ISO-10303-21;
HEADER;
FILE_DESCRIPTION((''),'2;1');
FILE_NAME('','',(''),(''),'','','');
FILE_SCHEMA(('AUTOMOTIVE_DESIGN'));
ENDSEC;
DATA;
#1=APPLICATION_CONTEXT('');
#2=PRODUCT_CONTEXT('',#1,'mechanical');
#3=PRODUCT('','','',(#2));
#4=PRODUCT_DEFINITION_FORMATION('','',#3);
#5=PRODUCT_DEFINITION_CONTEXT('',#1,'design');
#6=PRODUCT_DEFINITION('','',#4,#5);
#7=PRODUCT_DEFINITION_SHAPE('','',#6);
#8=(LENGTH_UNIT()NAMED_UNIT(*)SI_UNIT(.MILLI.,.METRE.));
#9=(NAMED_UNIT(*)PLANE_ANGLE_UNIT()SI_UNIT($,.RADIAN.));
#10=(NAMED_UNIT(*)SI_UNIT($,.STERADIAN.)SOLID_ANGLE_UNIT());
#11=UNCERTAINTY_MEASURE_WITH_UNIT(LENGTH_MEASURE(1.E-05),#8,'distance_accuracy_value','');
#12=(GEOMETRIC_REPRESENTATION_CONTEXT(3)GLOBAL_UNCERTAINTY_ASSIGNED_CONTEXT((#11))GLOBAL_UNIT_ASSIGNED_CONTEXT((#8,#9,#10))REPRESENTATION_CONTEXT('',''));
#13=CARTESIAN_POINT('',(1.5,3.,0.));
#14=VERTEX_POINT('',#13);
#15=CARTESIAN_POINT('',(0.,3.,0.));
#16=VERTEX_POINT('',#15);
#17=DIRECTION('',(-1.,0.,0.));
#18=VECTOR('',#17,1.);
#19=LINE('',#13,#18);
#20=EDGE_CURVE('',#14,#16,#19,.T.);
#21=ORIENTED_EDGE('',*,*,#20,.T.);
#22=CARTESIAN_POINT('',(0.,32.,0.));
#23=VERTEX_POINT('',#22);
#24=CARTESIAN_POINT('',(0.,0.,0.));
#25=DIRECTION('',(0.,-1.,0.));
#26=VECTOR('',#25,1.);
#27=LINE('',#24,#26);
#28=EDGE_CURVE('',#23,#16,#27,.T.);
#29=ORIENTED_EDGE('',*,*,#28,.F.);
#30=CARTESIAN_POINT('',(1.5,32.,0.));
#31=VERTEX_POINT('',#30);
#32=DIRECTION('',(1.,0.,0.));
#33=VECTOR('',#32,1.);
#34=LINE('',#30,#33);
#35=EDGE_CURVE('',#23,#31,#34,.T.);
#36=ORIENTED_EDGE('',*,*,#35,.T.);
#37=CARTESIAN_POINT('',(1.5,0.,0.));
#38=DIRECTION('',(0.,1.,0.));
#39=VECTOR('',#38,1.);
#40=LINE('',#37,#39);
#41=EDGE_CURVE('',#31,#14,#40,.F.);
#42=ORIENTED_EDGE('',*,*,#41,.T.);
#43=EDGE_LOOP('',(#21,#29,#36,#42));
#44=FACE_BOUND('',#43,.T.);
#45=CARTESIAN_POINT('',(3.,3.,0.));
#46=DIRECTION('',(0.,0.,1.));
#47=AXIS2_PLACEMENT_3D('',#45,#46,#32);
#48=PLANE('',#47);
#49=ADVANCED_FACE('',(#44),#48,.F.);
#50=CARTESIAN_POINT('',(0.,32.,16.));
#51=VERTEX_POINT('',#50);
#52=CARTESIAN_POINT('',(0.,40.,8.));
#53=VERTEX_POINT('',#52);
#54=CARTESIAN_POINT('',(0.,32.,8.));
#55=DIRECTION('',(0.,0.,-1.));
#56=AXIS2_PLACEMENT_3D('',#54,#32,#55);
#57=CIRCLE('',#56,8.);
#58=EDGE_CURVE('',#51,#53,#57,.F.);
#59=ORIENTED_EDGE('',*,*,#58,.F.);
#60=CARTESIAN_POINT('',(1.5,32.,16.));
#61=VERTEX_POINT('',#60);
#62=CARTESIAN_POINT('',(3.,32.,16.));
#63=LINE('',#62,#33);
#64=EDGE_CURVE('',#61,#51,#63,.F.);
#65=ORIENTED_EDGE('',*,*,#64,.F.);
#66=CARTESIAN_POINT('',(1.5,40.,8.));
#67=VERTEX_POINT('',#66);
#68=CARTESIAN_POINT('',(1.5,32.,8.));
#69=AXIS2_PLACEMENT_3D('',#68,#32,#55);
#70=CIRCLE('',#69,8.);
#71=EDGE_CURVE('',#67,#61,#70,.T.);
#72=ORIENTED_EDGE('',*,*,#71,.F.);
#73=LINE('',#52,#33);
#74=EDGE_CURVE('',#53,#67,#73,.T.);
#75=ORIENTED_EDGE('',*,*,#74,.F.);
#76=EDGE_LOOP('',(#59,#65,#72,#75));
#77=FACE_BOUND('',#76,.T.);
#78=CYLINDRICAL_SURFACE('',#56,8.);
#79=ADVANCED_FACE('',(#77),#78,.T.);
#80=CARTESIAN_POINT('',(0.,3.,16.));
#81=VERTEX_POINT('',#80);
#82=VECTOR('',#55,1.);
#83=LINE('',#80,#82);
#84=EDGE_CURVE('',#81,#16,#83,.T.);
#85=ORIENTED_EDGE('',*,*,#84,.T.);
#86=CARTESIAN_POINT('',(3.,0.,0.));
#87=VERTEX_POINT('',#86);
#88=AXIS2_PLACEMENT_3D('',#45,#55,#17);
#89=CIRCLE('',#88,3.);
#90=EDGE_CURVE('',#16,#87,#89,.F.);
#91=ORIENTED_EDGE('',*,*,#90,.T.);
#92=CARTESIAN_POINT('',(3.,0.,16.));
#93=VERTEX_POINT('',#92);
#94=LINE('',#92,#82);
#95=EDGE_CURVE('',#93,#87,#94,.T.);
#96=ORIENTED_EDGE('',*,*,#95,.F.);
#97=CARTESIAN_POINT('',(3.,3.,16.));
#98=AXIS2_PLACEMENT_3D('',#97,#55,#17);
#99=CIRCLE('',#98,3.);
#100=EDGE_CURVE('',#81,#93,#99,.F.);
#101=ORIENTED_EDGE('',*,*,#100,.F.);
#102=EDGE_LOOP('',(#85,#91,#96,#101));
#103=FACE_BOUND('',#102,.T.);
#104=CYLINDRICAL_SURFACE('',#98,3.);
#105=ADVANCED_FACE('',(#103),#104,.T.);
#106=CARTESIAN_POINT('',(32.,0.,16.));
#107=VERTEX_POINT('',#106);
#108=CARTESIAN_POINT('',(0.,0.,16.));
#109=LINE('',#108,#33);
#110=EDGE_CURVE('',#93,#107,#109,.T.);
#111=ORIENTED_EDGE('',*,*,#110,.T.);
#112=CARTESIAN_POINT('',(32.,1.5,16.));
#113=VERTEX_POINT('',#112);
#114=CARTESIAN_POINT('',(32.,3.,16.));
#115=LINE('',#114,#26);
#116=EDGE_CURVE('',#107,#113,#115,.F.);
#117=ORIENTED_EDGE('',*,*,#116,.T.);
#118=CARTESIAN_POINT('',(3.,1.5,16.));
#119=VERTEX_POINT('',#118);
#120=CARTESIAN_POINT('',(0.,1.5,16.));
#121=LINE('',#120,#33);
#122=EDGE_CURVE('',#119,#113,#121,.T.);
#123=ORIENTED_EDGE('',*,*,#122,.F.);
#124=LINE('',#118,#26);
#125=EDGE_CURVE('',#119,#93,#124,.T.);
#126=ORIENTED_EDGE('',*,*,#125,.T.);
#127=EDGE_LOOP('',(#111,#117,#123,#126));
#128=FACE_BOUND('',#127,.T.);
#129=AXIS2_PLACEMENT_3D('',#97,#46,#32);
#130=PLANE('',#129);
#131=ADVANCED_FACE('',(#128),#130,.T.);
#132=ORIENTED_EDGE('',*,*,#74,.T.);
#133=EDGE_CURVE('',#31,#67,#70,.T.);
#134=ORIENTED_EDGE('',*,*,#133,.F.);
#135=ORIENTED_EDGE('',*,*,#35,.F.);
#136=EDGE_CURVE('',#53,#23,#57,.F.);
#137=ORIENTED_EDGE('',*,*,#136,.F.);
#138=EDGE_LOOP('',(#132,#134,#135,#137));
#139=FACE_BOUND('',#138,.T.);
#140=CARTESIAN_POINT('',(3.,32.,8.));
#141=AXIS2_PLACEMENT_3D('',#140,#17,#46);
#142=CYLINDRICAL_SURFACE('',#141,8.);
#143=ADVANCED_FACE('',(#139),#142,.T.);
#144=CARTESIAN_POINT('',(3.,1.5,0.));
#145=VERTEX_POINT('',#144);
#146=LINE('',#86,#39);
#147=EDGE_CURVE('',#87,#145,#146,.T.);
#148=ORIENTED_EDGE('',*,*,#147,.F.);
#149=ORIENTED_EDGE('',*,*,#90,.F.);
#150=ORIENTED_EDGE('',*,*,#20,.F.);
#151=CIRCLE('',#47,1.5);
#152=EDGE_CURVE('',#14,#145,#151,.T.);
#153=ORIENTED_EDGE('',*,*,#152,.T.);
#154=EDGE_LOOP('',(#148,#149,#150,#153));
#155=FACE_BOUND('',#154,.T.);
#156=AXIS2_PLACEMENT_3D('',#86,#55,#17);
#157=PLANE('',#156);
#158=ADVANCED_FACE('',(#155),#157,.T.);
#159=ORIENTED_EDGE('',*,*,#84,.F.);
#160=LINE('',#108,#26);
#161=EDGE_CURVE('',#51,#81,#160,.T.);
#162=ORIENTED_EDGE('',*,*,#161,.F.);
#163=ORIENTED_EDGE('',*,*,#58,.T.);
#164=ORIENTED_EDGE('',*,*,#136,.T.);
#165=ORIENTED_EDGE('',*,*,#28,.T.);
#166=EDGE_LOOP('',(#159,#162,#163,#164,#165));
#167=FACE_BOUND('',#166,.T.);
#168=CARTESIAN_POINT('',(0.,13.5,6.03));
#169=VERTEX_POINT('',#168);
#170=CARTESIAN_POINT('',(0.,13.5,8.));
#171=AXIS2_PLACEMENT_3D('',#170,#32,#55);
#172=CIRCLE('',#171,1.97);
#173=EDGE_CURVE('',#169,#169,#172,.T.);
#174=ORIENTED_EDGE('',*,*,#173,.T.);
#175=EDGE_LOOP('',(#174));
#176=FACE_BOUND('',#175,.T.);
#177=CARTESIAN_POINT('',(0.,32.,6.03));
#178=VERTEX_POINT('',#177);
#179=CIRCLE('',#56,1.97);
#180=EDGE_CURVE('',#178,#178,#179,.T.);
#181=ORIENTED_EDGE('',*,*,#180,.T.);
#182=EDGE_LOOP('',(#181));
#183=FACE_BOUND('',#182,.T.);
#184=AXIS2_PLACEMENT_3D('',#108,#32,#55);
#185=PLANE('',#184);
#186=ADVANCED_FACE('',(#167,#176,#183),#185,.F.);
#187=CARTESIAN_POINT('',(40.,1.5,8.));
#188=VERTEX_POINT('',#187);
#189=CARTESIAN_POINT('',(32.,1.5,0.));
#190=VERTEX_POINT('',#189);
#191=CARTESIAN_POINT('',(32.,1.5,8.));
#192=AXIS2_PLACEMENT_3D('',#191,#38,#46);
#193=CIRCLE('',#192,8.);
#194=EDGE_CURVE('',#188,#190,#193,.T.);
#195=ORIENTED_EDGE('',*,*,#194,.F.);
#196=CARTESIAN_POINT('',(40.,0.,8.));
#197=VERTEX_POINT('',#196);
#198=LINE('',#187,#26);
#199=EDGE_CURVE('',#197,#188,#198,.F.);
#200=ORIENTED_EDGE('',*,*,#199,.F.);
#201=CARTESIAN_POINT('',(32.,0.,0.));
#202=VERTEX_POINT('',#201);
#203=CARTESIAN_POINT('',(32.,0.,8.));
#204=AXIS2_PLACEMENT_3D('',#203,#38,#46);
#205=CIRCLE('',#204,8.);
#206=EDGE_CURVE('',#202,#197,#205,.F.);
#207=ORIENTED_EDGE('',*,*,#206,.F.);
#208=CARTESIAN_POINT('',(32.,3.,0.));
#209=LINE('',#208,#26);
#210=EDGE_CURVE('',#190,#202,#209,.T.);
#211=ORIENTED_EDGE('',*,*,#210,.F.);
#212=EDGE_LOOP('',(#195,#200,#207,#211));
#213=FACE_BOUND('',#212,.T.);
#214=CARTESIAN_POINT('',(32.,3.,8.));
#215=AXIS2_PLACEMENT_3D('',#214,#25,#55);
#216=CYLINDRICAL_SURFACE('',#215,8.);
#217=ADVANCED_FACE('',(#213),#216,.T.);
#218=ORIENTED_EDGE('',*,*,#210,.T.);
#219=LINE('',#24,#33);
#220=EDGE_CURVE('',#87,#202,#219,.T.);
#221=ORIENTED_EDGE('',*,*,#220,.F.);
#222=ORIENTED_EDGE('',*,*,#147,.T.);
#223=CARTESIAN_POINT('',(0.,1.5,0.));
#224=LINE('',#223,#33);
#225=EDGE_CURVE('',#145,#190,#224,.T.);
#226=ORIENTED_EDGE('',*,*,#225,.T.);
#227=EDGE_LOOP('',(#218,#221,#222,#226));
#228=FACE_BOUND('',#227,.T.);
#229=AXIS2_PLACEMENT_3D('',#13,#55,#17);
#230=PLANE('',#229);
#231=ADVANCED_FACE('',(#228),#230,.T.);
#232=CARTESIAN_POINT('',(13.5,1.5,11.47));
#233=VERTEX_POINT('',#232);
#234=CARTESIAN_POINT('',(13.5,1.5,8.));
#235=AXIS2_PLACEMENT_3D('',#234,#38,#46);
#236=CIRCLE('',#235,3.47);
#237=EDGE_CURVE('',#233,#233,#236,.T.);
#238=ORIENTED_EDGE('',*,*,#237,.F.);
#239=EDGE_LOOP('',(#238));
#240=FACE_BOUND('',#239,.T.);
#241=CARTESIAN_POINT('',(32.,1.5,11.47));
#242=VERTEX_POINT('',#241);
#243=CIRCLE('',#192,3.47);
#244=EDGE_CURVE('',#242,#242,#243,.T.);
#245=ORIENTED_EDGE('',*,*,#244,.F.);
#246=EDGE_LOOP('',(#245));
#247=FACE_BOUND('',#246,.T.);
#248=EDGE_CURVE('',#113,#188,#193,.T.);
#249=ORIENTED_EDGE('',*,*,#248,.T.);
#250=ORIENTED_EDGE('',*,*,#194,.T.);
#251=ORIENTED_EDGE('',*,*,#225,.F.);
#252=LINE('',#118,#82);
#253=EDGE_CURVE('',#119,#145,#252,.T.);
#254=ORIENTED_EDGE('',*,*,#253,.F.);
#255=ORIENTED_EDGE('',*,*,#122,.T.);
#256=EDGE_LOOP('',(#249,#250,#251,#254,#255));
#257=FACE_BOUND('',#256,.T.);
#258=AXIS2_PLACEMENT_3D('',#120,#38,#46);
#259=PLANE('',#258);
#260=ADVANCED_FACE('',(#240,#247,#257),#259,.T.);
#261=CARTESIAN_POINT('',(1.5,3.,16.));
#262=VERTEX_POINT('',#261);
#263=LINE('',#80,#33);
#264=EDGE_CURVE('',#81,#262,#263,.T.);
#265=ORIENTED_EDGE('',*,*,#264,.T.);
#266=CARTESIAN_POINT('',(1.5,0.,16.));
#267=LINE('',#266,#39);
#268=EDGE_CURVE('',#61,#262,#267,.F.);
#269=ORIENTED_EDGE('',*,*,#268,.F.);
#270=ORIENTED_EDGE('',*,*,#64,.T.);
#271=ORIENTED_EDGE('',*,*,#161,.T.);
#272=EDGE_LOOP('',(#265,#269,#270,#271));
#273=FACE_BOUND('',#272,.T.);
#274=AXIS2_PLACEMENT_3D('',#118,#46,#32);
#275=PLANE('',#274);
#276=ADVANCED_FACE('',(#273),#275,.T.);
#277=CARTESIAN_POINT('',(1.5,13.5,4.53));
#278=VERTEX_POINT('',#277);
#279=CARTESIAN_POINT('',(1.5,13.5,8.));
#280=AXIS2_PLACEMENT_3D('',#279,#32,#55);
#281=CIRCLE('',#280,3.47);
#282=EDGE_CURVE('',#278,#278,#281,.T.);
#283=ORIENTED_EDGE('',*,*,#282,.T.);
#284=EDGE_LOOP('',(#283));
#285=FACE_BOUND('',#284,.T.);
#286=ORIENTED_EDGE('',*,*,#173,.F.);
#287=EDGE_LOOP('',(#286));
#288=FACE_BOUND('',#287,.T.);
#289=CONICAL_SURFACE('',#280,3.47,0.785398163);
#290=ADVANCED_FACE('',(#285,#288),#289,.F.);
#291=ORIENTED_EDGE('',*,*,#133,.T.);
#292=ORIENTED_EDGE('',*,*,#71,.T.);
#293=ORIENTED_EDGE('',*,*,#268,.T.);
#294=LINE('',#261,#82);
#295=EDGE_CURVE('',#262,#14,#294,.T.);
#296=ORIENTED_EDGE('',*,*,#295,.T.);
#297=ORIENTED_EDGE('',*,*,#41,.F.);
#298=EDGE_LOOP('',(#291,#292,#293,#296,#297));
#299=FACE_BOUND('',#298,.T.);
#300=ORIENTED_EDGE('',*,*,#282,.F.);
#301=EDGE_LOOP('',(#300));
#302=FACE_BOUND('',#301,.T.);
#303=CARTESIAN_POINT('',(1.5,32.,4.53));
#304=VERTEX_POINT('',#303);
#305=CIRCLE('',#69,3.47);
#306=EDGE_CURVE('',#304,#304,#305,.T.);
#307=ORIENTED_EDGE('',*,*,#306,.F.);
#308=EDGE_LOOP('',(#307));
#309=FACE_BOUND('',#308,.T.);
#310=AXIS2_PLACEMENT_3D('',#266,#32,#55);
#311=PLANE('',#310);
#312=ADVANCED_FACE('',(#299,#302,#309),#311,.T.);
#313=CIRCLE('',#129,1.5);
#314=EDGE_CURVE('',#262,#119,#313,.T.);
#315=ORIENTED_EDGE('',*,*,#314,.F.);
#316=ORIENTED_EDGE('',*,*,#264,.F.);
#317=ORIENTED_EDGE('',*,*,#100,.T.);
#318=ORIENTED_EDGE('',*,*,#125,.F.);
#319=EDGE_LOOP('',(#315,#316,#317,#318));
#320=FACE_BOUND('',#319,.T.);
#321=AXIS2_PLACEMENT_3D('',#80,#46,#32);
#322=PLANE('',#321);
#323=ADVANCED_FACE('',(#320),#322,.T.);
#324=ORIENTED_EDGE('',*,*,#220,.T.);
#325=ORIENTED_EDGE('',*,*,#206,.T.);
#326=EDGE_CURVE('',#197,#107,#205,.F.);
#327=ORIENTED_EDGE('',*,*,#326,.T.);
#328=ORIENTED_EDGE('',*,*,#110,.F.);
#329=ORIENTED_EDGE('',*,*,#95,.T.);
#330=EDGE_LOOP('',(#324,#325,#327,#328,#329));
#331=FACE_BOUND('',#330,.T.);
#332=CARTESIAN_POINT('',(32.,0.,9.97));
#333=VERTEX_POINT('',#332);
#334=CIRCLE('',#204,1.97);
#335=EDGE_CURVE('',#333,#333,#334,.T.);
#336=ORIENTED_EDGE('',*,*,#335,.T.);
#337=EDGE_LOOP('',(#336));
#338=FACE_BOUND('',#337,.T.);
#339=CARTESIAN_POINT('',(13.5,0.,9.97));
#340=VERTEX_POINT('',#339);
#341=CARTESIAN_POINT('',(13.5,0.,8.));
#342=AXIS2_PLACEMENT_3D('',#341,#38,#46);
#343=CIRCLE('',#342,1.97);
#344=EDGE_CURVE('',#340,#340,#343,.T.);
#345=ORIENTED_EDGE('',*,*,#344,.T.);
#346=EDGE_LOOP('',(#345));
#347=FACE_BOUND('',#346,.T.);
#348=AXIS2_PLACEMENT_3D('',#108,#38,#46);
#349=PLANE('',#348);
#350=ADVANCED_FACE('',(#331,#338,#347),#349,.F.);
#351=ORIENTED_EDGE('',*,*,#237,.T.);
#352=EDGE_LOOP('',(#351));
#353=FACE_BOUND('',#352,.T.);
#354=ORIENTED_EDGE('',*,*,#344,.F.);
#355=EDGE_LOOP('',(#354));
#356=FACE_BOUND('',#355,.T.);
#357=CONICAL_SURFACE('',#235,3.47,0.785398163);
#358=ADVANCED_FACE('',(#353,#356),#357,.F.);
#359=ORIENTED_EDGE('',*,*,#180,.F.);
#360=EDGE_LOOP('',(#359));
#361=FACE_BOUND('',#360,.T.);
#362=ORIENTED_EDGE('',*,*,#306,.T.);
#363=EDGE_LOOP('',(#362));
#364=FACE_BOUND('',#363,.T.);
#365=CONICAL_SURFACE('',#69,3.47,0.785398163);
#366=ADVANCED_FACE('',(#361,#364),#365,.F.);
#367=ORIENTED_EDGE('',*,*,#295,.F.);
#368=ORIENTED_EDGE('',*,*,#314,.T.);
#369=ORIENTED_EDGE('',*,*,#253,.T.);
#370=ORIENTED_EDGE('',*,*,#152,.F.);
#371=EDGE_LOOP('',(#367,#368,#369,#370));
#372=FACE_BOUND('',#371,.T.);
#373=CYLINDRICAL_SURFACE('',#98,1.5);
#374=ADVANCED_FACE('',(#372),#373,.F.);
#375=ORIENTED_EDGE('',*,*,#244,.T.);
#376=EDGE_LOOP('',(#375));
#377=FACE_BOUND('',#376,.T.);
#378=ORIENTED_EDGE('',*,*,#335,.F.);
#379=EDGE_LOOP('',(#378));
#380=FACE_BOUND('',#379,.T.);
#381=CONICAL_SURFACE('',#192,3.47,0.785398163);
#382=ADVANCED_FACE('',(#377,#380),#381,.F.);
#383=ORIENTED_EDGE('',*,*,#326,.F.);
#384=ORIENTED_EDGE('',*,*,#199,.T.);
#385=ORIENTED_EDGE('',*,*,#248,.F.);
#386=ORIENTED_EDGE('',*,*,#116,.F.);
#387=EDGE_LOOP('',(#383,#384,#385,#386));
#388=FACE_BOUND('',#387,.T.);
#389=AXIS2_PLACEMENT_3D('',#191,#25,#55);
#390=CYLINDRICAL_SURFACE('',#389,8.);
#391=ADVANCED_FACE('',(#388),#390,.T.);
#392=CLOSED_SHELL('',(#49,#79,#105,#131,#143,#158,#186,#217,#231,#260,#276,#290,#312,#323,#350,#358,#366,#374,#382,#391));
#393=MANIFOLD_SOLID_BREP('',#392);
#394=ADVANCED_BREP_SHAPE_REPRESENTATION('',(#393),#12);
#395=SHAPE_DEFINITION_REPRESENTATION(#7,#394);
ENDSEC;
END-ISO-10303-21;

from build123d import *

# Parameters (mm, degrees)
BASE_FLANGIA1_DEPTH    = 16
RACCORDO1_R            = 8
RIPETIZIONE_A_L1_COUNT = 2
RIPETIZIONE_A_L1_PITCH = 18.5
RIPETIZIONE_A_L2_COUNT = 2
RIPETIZIONE_A_L2_PITCH = 18.5


# Sheet-metal steps are written as plain solids
with BuildPart() as part:
    # Schizzo1 → Base-Flangia1 (new body)
    with BuildSketch(Plane.XY):
        with BuildLine():
            Line((40, 0), (3, 0))
            ThreePointArc((3, 0), (0.878679656, 0.878679656), (0, 3))
            Line((0, 3), (0, 40))
            Line((0, 40), (1.5, 40))
            Line((1.5, 40), (1.5, 3))
            ThreePointArc((1.5, 3), (1.939339828, 1.939339828), (3, 1.5))
            Line((3, 1.5), (40, 1.5))
            Line((40, 1.5), (40, 0))
        make_face()
    extrude(amount=BASE_FLANGIA1_DEPTH)

    # Raccordo1
    raccordo1_edges = [part.edges().sort_by_distance(p)[0] for p in [
        (40, 0.75, 16),
        (40, 0.75, 0),
        (0.75, 40, 0),
        (0.75, 40, 16),
    ]]
    fillet(raccordo1_edges, radius=RACCORDO1_R - 0.0001)  # a hair under: the kernel refuses the full size

    # Schizzo7 → Foro svasato per Vite M3 a testa svasata (revolve, cut)
    with BuildSketch(Plane(origin=(32, 1.5, 8), x_dir=(0, 0, 1), z_dir=(1, 0, 0))):
        Polygon((0, 0), (0, 1.5), (1.7, 1.5), (1.7, 1.77), (3.47, 0), align=None)
    foro_svasato_per_vite_m3_a_testa_svasata = revolve(axis=Axis((32, 7.85, 8), (0, -1, 0)), mode=Mode.SUBTRACT)

    # Ripetizione a L1: Foro svasato per Vite M3 a testa svasata ×2
    with Locations(*[(-i * RIPETIZIONE_A_L1_PITCH, 0, 0) for i in range(1, RIPETIZIONE_A_L1_COUNT)]):
        add(foro_svasato_per_vite_m3_a_testa_svasata, mode=Mode.SUBTRACT)

    # Schizzo9 → Foro svasato per Vite M3 a testa sva 2 (revolve, cut)
    with BuildSketch(Plane(origin=(1.5, 32, 8), x_dir=(0, 0, -1), z_dir=(0, 1, 0))):
        Polygon((0, 0), (0, 1.5), (1.7, 1.5), (1.7, 1.77), (3.47, 0), align=None)
    foro_svasato_per_vite_m3_a_testa_sva_2 = revolve(axis=Axis((7.85, 32, 8), (-1, 0, 0)), mode=Mode.SUBTRACT)

    # Ripetizione a L2: Foro svasato per Vite M3 a testa sva 2 ×2
    with Locations(*[(0, -i * RIPETIZIONE_A_L2_PITCH, 0) for i in range(1, RIPETIZIONE_A_L2_COUNT)]):
        add(foro_svasato_per_vite_m3_a_testa_sva_2, mode=Mode.SUBTRACT)


solid = part.part
